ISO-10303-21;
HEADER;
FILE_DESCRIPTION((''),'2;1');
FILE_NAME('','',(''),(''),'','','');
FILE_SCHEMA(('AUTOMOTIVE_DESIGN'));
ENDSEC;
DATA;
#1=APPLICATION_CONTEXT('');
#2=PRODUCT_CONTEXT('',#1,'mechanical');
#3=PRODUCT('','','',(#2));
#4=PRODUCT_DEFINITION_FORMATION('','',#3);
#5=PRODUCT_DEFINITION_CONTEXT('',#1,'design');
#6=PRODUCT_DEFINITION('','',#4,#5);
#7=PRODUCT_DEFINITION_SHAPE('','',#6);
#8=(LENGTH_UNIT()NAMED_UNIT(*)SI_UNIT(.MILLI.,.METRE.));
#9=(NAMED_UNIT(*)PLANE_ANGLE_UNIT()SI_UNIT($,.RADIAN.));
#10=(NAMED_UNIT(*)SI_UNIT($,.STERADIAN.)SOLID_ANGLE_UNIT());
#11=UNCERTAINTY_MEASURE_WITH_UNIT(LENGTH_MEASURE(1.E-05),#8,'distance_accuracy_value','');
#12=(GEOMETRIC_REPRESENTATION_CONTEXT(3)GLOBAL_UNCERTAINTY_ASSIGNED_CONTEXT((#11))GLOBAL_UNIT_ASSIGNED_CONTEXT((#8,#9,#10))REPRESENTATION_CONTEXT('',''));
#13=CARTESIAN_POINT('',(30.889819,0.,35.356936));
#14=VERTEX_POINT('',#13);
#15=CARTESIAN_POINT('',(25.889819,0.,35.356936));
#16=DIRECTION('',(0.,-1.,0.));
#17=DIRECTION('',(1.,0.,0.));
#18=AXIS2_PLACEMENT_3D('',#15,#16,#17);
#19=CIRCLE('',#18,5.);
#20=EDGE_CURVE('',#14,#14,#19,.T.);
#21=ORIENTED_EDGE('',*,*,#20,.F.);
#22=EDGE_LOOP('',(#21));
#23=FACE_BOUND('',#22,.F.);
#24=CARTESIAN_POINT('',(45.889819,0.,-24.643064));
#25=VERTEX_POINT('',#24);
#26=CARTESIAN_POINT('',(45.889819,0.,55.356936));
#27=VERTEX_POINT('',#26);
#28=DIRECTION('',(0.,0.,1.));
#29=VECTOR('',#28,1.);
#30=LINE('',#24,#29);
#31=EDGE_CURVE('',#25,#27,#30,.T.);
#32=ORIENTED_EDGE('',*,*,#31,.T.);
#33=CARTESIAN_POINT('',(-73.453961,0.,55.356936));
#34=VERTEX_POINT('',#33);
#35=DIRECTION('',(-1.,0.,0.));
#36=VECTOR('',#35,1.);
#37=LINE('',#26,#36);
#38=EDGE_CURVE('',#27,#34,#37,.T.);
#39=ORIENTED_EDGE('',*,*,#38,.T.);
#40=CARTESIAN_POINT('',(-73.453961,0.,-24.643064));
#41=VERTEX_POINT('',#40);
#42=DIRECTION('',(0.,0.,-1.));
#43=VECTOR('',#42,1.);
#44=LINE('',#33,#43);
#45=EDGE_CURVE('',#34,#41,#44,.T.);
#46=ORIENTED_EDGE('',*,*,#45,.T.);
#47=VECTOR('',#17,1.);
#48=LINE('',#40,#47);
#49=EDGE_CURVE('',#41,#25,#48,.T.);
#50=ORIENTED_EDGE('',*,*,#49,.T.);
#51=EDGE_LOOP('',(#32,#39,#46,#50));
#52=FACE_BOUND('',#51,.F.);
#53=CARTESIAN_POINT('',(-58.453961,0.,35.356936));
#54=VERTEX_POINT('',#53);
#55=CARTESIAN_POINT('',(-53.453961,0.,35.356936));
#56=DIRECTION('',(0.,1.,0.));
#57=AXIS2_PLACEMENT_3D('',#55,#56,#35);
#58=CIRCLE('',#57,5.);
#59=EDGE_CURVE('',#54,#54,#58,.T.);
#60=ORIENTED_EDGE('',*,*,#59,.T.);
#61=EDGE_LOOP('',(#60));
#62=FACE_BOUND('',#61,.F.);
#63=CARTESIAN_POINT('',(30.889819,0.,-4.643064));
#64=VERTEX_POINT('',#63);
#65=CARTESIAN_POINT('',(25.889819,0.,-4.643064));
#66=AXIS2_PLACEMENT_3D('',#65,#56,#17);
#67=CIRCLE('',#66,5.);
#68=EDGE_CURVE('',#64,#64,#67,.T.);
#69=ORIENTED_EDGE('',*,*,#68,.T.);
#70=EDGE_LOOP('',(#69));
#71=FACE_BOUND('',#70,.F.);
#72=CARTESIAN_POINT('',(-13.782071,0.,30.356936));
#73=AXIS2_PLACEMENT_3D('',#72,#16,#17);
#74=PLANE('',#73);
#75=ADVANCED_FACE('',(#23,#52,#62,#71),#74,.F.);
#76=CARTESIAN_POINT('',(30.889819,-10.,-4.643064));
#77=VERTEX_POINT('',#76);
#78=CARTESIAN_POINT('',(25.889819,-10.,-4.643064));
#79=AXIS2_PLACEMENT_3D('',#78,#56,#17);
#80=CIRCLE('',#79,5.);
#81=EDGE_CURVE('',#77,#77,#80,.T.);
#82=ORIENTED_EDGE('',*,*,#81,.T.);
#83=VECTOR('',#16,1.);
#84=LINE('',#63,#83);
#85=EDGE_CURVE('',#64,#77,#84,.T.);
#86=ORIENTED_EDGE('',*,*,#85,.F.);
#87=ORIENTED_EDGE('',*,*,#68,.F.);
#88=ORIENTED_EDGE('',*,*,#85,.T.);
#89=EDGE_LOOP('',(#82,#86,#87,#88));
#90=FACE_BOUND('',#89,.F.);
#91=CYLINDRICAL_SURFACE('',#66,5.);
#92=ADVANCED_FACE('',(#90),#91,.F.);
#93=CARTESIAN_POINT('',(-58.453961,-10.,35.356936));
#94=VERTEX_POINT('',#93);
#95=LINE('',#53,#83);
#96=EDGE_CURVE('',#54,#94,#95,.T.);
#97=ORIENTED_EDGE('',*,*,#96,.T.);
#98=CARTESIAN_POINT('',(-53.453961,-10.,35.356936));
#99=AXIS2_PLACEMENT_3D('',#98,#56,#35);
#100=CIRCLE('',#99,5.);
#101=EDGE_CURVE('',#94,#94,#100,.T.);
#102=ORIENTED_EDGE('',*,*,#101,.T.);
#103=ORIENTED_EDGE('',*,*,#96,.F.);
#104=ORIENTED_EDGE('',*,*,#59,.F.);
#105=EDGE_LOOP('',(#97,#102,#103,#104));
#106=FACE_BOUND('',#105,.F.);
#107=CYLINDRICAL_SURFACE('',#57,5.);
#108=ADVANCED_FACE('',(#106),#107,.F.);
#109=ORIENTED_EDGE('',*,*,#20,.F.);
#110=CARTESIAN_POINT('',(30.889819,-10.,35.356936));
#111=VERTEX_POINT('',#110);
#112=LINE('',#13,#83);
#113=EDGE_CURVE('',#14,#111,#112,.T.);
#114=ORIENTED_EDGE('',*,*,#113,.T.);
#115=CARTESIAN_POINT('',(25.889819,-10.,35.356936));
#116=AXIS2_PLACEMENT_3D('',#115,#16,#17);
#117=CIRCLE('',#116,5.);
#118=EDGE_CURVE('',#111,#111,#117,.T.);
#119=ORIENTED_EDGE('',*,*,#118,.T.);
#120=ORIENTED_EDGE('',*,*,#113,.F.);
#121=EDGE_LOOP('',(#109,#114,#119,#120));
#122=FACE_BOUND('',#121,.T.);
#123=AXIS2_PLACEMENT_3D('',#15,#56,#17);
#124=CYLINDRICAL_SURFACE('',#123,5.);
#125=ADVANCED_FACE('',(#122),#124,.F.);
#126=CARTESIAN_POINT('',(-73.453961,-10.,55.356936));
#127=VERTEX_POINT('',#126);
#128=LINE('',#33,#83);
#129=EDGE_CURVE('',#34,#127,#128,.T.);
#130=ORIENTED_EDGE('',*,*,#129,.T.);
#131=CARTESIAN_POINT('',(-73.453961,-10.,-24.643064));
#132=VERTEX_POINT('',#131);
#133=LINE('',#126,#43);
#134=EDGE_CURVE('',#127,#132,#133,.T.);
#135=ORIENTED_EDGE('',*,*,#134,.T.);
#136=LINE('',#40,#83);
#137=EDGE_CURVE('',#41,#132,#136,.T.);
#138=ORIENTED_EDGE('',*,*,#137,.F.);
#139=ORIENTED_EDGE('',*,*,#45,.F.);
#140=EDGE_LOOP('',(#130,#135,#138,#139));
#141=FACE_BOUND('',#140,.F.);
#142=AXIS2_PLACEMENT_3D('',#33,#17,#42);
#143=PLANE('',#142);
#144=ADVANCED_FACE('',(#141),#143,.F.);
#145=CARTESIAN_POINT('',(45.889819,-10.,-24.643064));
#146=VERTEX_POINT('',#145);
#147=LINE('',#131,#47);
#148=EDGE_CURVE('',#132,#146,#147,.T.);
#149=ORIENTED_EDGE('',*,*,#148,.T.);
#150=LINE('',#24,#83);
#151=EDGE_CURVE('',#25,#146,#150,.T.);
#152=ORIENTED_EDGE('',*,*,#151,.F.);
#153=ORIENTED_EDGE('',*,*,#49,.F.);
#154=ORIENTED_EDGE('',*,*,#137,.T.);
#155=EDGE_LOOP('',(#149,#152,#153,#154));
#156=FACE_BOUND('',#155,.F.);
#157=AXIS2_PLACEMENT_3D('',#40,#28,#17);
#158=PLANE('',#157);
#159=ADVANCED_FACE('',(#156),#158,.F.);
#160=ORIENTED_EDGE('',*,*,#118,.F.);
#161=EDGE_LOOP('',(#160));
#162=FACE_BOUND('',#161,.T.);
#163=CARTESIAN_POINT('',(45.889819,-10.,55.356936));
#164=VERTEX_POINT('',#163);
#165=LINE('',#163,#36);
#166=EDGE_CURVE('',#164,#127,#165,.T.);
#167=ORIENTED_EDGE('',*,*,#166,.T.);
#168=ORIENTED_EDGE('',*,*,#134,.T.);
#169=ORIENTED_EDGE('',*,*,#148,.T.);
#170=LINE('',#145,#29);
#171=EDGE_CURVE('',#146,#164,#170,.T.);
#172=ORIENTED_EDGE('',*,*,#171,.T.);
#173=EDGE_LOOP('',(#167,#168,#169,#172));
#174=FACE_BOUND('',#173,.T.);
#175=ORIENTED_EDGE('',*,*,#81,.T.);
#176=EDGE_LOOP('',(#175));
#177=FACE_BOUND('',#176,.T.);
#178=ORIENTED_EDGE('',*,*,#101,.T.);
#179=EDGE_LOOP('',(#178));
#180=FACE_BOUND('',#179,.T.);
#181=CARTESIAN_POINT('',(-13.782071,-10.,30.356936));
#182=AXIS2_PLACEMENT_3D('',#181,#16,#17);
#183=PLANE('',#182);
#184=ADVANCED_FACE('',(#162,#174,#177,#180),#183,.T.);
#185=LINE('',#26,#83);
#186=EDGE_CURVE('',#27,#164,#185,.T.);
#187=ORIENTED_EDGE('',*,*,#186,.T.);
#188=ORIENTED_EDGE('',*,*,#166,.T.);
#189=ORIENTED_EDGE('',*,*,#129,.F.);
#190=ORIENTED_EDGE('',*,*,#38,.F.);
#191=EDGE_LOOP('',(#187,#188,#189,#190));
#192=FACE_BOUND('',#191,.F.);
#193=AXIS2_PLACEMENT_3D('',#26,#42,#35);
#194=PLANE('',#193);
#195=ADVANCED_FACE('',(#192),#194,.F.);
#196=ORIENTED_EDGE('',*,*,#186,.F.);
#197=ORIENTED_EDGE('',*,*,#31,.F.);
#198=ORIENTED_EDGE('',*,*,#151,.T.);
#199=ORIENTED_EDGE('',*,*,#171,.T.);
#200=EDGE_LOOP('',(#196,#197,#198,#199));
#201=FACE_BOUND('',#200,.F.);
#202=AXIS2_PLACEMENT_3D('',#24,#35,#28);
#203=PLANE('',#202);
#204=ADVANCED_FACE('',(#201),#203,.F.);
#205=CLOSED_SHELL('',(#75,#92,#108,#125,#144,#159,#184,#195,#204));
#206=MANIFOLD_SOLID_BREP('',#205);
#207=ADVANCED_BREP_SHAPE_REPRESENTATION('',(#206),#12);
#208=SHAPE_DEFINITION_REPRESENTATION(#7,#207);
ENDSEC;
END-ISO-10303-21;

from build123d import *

# Parameters (mm, degrees)
F0_R     = 5
F1_DEPTH = 10


# Not quite as in the source:
# - the program builds the solid bodies; features that only make, move or delete a surface that nothing else refers to are left out


with BuildPart() as f1:
    # F0 (on Front) → F1 (new body)
    with BuildSketch(Plane.XZ):
        Polygon((45.889818927, 55.3569364734), (-73.4539608263, 55.3569364734), (-73.4539608263, 35.3569364734), (-73.4539608263, 5.3569364734), (45.889818927, 5.3569364734), (45.889818927, 35.3569364734), align=None)
        with BuildLine():
            ThreePointArc((-48.4539608263, 35.3569364734), (-53.4539608263, 30.3569364734), (-58.4539608263, 35.3569364734))
            ThreePointArc((-58.4539608263, 35.3569364734), (-53.4539608263, 40.3569364734), (-48.4539608263, 35.3569364734))
        make_face(mode=Mode.SUBTRACT)
        with Locations((25.889818927, 35.3569364734)):
            Circle(F0_R, mode=Mode.SUBTRACT)
        with BuildLine():
            Line((45.889818927, 5.3569364734), (-73.4539608263, 5.3569364734))
            Line((-73.4539608263, 5.3569364734), (-73.4539608263, -4.6430635266))
            Line((-73.4539608263, -4.6430635266), (20.889818927, -4.6430635266))
            ThreePointArc((20.889818927, -4.6430635266), (25.889818927, 0.3569364734), (30.889818927, -4.6430635266))
            Line((30.889818927, -4.6430635266), (45.889818927, -4.6430635266))
            Line((45.889818927, -4.6430635266), (45.889818927, 5.3569364734))
        make_face()
        with BuildLine():
            Line((20.889818927, -4.6430635266), (-73.4539608263, -4.6430635266))
            Line((-73.4539608263, -4.6430635266), (-73.4539608263, -24.6430635266))
            Line((-73.4539608263, -24.6430635266), (25.4732109606, -24.6430635266))
            Line((25.4732109606, -24.6430635266), (45.889818927, -24.6430635266))
            Line((45.889818927, -24.6430635266), (45.889818927, -4.6430635266))
            Line((45.889818927, -4.6430635266), (30.889818927, -4.6430635266))
            ThreePointArc((30.889818927, -4.6430635266), (25.889818927, -9.6430635266), (20.889818927, -4.6430635266))
        make_face()
    extrude(amount=F1_DEPTH)


solid = f1.part
